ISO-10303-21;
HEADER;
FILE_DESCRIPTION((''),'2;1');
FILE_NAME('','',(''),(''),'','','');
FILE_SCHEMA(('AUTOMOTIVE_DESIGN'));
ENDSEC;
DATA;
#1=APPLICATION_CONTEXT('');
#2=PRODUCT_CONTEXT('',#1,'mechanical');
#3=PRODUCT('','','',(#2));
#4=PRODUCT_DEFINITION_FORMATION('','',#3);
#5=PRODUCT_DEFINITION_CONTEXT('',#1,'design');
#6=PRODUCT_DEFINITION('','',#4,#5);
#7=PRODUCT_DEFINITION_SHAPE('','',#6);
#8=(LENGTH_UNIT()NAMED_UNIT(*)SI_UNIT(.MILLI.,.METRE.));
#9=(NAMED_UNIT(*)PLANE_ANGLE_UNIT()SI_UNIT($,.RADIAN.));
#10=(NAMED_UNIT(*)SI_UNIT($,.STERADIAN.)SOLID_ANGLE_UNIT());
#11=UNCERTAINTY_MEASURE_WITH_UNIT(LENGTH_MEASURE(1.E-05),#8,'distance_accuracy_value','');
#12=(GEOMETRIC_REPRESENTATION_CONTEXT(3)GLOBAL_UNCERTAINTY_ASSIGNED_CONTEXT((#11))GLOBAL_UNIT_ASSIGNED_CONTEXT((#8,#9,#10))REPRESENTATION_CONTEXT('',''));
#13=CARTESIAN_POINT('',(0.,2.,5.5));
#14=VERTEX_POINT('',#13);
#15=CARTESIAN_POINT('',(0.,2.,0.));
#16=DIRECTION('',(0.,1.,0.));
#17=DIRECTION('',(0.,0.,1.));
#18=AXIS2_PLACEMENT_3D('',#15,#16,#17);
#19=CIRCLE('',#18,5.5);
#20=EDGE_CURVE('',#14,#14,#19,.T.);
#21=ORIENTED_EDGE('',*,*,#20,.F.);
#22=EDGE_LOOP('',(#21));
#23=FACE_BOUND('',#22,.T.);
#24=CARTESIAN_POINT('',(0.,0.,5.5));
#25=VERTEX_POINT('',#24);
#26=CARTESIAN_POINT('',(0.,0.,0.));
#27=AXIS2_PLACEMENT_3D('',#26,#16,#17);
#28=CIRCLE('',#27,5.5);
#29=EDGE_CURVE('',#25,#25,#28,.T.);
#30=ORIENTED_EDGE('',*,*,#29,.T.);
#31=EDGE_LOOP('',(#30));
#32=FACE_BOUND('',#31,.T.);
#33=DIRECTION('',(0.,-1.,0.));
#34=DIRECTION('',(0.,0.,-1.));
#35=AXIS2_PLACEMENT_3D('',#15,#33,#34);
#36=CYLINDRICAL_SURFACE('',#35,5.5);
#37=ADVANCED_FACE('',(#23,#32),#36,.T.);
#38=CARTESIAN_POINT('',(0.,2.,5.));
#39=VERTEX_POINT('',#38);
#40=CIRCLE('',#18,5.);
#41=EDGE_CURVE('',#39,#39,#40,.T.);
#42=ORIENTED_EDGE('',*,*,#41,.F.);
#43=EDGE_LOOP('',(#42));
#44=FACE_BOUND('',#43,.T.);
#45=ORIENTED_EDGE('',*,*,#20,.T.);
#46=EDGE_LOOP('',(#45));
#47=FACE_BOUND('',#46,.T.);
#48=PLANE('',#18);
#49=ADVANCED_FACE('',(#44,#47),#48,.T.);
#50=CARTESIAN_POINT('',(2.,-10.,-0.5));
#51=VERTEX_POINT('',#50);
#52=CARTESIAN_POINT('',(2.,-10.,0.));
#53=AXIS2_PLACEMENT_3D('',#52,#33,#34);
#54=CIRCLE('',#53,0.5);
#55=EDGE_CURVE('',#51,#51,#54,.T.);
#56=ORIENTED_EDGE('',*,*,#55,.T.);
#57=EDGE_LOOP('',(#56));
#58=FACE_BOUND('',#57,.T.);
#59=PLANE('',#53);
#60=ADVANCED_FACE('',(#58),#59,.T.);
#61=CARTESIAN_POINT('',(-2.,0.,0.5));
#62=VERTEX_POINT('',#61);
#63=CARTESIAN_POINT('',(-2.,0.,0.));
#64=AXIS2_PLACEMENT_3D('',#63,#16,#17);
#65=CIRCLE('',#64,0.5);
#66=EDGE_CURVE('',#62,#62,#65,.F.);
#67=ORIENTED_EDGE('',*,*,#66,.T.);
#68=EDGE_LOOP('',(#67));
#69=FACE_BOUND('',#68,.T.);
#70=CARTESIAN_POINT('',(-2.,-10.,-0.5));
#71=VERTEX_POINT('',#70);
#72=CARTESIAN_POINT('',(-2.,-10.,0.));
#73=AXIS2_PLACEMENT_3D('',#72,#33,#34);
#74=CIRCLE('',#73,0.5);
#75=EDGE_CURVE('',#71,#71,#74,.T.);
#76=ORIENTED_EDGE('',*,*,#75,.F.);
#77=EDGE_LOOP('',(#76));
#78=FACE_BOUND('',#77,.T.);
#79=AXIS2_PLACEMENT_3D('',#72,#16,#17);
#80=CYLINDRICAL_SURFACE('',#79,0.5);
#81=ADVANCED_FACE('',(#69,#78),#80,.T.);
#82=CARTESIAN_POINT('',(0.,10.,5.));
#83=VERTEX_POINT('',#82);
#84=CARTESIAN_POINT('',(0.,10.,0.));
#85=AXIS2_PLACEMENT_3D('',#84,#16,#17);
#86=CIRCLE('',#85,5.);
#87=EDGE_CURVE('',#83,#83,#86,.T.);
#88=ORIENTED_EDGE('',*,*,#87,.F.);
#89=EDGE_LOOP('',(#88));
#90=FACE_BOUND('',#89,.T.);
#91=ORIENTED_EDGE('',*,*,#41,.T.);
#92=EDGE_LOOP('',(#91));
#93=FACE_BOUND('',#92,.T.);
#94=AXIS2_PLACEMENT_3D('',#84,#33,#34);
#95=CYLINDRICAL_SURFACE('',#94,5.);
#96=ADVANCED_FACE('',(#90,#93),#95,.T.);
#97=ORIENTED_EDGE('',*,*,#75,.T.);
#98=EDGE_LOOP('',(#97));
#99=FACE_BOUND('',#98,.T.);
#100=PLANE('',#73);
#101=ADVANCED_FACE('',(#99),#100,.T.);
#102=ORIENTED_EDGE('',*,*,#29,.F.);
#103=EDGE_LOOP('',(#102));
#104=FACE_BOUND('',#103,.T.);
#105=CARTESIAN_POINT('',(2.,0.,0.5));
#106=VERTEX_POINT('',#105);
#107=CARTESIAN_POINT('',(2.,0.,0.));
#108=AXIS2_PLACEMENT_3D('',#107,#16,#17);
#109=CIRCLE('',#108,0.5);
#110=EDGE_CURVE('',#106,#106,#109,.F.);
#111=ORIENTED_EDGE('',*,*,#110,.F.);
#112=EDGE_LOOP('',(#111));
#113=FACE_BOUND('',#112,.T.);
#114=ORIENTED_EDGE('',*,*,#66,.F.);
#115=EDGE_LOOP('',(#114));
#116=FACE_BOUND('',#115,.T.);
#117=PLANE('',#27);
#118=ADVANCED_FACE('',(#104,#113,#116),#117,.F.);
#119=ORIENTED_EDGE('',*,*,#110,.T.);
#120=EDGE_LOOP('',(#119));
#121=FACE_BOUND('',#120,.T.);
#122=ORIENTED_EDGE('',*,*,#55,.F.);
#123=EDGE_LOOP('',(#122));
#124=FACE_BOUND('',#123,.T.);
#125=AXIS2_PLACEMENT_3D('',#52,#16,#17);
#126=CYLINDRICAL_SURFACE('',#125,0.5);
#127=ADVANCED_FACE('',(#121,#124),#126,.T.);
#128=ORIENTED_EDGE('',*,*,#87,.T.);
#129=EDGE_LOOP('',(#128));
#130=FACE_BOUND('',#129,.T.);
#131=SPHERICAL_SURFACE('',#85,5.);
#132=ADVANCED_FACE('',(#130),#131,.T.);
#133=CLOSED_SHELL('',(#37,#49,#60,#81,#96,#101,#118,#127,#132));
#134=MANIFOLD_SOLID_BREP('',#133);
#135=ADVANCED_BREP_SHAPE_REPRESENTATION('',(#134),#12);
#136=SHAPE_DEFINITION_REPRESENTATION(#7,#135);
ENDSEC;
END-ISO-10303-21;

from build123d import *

# Parameters (mm, degrees)
SKETCH1_R           = 5.5
BOSS_EXTRUDE1_DEPTH = 2
SKETCH2_R           = 5
BOSS_EXTRUDE2_DEPTH = 8
SKETCH4_R           = 0.5
BOSS_EXTRUDE3_DEPTH = 10


# Read off the part's stored shape, not the designer's step: Dome1
with BuildPart() as part:
    # Sketch1 → Boss-Extrude1 (new body)
    with BuildSketch(Plane(origin=(0, 0, 0), x_dir=(1, 0, 0), z_dir=(0, 1, 0))):
        with Locations(Location((0, 0, 0), (0, 0, 270))):
            Circle(SKETCH1_R)
    extrude(amount=BOSS_EXTRUDE1_DEPTH)

    # Sketch2 → Boss-Extrude2 (add)
    with BuildSketch(Plane(origin=(0, 2, 0), x_dir=(1, 0, 0), z_dir=(0, 1, 0))):
        with Locations(Location((0, 0, 0), (0, 0, 270))):
            Circle(SKETCH2_R)
    extrude(amount=BOSS_EXTRUDE2_DEPTH)

    # Dome1 outline → Dome1 (revolve)
    with BuildSketch(Plane.XY):
        with BuildLine():
            Line((0, 10), (5, 9.999999995))
            ThreePointArc((5, 9.999999995), (3.535533908, 13.535533904), (0, 15))
            Line((0, 15), (0, 10))
        make_face()
    revolve(axis=Axis((0, 0, 0), (0, 1, 0)))

    # Sketch4 → Boss-Extrude3 (add)
    with BuildSketch(Plane.XZ):
        with Locations(Location((-2, 0, 0), (0, 0, 90))):
            Circle(SKETCH4_R)
        with Locations(Location((2, 0, 0), (0, 0, 90))):
            Circle(SKETCH4_R)
    extrude(amount=BOSS_EXTRUDE3_DEPTH)


solid = part.part
